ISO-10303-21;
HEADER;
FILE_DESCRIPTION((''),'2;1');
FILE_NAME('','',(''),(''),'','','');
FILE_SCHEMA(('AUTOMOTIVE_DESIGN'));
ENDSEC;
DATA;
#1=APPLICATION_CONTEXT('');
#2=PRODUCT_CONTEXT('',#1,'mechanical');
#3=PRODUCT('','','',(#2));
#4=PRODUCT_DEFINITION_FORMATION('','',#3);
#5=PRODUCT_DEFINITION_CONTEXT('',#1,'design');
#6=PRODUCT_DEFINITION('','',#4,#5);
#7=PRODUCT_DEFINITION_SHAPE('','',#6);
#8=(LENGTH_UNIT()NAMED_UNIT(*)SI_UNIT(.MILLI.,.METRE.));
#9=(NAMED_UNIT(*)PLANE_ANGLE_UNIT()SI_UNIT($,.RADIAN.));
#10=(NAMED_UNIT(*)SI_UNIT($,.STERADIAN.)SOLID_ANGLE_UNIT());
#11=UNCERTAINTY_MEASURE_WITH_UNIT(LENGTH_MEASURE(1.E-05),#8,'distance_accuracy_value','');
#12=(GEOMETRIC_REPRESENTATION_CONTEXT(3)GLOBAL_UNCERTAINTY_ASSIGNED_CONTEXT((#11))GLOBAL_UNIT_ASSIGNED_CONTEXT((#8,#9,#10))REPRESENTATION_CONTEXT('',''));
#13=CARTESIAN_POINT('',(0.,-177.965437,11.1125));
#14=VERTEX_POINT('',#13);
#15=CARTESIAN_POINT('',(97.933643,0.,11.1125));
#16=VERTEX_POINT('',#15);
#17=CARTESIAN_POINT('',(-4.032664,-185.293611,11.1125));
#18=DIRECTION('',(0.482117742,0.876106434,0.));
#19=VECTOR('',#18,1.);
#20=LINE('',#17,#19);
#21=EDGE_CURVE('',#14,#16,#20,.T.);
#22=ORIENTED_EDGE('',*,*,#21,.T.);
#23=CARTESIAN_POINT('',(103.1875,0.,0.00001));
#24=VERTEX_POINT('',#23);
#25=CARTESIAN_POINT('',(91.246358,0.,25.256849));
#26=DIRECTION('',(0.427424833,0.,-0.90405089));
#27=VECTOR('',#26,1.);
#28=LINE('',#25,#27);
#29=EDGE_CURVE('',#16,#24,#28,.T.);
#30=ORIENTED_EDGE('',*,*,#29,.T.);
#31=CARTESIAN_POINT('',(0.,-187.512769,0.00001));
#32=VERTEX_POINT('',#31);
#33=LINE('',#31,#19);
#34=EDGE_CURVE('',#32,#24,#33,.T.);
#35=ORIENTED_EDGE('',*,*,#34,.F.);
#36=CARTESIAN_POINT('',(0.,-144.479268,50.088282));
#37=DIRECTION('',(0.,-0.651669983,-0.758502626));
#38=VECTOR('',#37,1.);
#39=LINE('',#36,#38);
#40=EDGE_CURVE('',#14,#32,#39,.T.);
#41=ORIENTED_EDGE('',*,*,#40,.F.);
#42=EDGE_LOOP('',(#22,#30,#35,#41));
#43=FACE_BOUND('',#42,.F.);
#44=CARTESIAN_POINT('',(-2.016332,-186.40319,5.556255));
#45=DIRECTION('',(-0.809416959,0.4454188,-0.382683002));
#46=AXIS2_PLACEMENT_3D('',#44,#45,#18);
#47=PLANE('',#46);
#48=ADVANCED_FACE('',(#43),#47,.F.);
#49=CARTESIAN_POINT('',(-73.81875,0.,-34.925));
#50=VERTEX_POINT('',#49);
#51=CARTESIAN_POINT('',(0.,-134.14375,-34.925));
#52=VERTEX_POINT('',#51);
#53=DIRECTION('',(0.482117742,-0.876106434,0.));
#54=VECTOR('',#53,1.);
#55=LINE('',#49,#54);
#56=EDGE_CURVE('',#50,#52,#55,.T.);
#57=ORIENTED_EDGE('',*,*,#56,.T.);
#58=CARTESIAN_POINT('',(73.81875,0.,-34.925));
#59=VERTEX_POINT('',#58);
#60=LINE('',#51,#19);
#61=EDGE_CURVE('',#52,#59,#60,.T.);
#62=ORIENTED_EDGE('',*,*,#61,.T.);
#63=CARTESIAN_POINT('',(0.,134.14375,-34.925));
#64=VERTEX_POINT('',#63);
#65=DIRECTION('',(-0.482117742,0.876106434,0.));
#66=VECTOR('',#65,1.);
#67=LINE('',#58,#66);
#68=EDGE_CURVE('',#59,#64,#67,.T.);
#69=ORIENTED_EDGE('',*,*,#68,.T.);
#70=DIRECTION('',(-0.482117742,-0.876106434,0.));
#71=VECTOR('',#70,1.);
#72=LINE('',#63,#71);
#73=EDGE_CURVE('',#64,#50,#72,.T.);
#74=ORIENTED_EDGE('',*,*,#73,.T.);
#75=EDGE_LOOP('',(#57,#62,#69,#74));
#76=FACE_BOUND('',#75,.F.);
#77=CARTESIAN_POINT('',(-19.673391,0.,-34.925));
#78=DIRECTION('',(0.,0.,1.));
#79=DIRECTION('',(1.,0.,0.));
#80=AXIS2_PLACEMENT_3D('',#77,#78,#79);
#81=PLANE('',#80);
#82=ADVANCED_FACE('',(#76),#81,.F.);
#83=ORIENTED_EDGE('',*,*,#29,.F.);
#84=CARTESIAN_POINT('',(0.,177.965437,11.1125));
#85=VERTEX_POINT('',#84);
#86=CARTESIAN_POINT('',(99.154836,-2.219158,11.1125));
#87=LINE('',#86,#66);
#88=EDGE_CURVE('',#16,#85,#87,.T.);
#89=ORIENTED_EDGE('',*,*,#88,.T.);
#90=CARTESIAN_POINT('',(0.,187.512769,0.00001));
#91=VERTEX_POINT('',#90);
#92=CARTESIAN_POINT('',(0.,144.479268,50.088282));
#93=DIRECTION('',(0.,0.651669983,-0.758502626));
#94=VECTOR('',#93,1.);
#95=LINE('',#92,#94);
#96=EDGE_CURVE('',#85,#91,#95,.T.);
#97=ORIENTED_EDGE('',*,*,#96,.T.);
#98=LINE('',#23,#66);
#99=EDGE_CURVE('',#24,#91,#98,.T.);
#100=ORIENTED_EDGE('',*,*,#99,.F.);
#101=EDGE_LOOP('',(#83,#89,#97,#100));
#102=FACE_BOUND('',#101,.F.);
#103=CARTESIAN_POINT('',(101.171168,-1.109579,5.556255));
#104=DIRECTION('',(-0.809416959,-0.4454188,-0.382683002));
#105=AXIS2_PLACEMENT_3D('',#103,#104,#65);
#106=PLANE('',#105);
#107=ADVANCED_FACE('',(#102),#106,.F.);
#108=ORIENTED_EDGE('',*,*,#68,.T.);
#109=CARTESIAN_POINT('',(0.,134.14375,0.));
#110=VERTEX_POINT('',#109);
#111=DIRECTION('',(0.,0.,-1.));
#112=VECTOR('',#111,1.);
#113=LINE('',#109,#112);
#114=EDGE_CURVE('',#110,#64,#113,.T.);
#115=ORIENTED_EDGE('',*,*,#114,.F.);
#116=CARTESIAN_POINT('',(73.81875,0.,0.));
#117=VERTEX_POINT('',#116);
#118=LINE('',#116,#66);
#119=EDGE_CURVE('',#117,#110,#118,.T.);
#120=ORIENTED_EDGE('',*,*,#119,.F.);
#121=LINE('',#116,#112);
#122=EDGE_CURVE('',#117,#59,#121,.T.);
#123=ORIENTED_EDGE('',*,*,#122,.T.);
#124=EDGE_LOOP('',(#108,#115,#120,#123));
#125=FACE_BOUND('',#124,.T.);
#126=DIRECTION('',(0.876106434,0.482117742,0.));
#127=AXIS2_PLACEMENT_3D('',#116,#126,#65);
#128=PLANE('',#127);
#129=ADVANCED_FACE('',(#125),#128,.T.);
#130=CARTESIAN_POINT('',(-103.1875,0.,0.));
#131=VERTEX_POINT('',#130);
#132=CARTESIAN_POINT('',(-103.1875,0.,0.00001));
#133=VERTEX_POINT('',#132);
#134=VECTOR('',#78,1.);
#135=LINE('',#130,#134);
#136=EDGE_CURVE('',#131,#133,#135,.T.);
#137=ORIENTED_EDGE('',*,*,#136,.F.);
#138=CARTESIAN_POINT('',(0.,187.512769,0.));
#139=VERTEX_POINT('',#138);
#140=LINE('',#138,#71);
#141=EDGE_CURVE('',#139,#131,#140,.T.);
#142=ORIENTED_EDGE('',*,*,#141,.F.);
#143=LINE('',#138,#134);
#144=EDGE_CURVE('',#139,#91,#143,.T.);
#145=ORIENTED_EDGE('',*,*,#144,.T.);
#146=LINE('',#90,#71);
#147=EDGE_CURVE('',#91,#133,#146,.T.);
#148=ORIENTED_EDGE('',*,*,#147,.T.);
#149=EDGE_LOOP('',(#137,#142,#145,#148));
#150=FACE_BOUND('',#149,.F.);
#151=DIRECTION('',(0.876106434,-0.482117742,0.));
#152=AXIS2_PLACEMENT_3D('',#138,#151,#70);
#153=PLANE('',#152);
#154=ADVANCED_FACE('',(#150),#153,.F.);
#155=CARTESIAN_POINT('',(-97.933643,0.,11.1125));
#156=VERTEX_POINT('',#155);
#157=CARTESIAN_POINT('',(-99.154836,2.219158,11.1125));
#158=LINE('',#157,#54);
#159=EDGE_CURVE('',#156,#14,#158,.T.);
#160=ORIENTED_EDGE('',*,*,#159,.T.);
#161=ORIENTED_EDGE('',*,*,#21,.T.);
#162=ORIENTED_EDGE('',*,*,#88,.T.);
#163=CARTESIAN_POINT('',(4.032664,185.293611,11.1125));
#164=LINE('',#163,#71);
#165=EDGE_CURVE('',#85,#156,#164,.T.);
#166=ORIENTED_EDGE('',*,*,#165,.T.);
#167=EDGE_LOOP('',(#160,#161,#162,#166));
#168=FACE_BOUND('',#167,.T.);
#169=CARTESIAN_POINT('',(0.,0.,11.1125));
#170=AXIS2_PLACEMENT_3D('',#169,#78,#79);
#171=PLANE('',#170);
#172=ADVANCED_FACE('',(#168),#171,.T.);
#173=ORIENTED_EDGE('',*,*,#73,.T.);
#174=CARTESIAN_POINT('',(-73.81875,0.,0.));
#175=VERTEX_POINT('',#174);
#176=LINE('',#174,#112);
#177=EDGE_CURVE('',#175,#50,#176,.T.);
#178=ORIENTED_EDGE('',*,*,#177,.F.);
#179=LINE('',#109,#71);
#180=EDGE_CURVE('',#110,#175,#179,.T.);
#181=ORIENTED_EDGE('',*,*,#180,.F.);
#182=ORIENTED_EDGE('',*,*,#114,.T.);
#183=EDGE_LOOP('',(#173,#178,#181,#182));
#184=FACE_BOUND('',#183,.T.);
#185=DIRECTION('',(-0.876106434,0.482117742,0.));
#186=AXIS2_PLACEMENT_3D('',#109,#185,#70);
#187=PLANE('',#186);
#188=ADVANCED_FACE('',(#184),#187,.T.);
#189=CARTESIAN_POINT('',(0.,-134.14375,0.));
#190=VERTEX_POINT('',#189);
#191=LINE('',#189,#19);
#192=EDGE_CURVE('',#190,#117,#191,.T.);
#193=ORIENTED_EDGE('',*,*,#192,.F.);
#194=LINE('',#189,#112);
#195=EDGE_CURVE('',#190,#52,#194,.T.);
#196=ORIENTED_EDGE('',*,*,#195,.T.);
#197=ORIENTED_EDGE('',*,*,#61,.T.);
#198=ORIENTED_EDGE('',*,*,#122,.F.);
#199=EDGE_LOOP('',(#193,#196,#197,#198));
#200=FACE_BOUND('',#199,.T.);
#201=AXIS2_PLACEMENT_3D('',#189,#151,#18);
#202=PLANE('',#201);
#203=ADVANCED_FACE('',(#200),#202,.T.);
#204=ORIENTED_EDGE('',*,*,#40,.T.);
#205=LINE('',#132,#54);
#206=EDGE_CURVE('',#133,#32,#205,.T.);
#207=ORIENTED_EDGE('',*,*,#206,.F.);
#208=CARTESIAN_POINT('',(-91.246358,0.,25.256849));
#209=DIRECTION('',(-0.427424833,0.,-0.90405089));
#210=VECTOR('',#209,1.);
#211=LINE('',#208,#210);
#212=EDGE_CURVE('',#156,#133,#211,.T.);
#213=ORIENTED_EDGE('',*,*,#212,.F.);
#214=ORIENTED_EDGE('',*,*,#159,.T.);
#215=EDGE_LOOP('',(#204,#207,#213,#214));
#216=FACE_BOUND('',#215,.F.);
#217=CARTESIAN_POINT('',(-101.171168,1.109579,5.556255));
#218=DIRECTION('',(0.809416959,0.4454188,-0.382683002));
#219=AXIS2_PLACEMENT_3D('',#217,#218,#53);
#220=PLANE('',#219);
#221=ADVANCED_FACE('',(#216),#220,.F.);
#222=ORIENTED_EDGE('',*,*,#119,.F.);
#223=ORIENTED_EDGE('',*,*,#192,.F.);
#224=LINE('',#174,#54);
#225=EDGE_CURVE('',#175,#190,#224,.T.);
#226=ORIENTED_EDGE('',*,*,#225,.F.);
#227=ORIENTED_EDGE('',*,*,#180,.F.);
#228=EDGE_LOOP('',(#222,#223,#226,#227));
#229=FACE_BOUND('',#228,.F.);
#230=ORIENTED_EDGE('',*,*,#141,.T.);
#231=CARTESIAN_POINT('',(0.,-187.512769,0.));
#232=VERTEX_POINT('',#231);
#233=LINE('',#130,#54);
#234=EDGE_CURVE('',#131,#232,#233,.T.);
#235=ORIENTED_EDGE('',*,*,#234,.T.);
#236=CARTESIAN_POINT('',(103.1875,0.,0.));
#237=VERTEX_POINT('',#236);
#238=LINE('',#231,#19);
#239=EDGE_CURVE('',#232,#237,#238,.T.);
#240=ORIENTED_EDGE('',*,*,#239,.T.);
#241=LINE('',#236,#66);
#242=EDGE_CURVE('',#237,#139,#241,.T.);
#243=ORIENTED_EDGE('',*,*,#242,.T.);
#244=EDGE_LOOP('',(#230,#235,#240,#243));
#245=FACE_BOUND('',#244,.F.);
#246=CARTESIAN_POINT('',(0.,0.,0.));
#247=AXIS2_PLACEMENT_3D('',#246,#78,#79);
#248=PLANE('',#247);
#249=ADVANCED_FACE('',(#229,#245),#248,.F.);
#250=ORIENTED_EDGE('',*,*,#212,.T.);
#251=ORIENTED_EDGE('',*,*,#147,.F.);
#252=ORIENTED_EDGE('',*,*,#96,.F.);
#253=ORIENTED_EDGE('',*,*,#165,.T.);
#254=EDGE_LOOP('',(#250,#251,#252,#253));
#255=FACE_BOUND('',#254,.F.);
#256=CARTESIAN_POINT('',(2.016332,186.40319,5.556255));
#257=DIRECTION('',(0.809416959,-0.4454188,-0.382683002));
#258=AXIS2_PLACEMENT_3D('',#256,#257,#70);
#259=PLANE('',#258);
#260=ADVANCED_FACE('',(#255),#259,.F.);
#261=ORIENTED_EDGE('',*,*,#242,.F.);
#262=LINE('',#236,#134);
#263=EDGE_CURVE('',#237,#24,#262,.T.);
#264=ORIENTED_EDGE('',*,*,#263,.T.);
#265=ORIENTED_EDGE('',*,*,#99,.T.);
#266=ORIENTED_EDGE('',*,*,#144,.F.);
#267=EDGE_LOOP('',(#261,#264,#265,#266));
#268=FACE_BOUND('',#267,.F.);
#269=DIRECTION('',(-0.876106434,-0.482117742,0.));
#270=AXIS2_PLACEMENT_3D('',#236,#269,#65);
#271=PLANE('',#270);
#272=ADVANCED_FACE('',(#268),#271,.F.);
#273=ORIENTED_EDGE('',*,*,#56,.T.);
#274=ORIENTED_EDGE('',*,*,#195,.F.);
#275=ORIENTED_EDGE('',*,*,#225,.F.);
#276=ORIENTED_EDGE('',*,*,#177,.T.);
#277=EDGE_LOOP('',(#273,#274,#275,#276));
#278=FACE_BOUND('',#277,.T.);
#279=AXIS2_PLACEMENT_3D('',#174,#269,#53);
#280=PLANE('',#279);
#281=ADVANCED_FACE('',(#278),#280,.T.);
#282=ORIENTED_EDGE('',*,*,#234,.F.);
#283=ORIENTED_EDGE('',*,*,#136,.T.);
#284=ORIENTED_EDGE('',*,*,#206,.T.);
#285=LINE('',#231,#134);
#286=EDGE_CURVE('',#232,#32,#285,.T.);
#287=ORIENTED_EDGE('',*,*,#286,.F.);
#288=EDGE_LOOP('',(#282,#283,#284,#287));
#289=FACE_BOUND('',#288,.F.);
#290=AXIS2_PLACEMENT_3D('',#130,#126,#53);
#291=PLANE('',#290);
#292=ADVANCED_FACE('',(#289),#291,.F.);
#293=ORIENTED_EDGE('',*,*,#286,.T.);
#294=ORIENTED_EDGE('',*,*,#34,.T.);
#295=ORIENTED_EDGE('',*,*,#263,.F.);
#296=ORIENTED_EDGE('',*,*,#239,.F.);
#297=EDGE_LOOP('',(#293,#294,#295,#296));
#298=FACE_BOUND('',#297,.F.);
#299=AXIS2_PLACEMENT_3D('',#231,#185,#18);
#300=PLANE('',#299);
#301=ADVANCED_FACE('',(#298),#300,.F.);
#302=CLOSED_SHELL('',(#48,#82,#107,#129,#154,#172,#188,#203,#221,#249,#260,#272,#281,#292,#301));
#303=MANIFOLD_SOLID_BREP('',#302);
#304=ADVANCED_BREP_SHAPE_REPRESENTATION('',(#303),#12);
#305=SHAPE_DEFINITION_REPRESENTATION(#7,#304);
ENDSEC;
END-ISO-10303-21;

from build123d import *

# Parameters (mm, degrees)
F1_DEPTH = 34.925
F2_DEPTH = 11.1125
F3_SIZE2 = 11.11249
F3_SIZE  = 4.602938


# Not quite as in the source:
# - a fillet or chamfer is up to 0.001 mm smaller than in the source, because OpenCascade refuses the exact size


with BuildPart() as f1:
    # F0 (on Top) → F1 (new body)
    with BuildSketch(Plane.XY):
        Polygon((0, -134.14375), (0, 134.14375), (-73.81875, 0), align=None)
        Polygon((73.81875, 0), (0, 134.14375), (0, -134.14375), align=None)
    extrude(amount=-F1_DEPTH)

    # F0 (on Top) + F1_face (on face) → F2 (join)
    with BuildSketch(Plane.XY):
        Polygon((-103.1875, 0), (0, -187.5127688172), (103.1875, 0), (0, 187.5127688172), align=None)
        Polygon((-73.81875, 0), (0, 134.14375), (73.81875, 0), (0, -134.14375), align=None, mode=Mode.SUBTRACT)
    with BuildSketch(Plane.XY):
        Polygon((0, 134.14375), (-73.81875, 0), (0, -134.14375), (73.81875, 0), align=None)
    extrude(amount=F2_DEPTH)

    # F3 (size 4.6029482119 and 11.1125 in the source; OpenCascade refuses exactly that, so slightly less here)
    f3_edges = [f1.edges().sort_by_distance(p)[0] for p in [
        (-51.59375, -93.756384, 11.1125),
        (-51.59375, 93.756384, 11.1125),
        (51.59375, 93.756384, 11.1125),
        (51.59375, -93.756384, 11.1125),
    ]]
    f3_side = f1.faces().sort_by_distance((0, 0, 11.1125))[0]
    chamfer(f3_edges, length=F3_SIZE, length2=F3_SIZE2, reference=f3_side)


solid = f1.part
